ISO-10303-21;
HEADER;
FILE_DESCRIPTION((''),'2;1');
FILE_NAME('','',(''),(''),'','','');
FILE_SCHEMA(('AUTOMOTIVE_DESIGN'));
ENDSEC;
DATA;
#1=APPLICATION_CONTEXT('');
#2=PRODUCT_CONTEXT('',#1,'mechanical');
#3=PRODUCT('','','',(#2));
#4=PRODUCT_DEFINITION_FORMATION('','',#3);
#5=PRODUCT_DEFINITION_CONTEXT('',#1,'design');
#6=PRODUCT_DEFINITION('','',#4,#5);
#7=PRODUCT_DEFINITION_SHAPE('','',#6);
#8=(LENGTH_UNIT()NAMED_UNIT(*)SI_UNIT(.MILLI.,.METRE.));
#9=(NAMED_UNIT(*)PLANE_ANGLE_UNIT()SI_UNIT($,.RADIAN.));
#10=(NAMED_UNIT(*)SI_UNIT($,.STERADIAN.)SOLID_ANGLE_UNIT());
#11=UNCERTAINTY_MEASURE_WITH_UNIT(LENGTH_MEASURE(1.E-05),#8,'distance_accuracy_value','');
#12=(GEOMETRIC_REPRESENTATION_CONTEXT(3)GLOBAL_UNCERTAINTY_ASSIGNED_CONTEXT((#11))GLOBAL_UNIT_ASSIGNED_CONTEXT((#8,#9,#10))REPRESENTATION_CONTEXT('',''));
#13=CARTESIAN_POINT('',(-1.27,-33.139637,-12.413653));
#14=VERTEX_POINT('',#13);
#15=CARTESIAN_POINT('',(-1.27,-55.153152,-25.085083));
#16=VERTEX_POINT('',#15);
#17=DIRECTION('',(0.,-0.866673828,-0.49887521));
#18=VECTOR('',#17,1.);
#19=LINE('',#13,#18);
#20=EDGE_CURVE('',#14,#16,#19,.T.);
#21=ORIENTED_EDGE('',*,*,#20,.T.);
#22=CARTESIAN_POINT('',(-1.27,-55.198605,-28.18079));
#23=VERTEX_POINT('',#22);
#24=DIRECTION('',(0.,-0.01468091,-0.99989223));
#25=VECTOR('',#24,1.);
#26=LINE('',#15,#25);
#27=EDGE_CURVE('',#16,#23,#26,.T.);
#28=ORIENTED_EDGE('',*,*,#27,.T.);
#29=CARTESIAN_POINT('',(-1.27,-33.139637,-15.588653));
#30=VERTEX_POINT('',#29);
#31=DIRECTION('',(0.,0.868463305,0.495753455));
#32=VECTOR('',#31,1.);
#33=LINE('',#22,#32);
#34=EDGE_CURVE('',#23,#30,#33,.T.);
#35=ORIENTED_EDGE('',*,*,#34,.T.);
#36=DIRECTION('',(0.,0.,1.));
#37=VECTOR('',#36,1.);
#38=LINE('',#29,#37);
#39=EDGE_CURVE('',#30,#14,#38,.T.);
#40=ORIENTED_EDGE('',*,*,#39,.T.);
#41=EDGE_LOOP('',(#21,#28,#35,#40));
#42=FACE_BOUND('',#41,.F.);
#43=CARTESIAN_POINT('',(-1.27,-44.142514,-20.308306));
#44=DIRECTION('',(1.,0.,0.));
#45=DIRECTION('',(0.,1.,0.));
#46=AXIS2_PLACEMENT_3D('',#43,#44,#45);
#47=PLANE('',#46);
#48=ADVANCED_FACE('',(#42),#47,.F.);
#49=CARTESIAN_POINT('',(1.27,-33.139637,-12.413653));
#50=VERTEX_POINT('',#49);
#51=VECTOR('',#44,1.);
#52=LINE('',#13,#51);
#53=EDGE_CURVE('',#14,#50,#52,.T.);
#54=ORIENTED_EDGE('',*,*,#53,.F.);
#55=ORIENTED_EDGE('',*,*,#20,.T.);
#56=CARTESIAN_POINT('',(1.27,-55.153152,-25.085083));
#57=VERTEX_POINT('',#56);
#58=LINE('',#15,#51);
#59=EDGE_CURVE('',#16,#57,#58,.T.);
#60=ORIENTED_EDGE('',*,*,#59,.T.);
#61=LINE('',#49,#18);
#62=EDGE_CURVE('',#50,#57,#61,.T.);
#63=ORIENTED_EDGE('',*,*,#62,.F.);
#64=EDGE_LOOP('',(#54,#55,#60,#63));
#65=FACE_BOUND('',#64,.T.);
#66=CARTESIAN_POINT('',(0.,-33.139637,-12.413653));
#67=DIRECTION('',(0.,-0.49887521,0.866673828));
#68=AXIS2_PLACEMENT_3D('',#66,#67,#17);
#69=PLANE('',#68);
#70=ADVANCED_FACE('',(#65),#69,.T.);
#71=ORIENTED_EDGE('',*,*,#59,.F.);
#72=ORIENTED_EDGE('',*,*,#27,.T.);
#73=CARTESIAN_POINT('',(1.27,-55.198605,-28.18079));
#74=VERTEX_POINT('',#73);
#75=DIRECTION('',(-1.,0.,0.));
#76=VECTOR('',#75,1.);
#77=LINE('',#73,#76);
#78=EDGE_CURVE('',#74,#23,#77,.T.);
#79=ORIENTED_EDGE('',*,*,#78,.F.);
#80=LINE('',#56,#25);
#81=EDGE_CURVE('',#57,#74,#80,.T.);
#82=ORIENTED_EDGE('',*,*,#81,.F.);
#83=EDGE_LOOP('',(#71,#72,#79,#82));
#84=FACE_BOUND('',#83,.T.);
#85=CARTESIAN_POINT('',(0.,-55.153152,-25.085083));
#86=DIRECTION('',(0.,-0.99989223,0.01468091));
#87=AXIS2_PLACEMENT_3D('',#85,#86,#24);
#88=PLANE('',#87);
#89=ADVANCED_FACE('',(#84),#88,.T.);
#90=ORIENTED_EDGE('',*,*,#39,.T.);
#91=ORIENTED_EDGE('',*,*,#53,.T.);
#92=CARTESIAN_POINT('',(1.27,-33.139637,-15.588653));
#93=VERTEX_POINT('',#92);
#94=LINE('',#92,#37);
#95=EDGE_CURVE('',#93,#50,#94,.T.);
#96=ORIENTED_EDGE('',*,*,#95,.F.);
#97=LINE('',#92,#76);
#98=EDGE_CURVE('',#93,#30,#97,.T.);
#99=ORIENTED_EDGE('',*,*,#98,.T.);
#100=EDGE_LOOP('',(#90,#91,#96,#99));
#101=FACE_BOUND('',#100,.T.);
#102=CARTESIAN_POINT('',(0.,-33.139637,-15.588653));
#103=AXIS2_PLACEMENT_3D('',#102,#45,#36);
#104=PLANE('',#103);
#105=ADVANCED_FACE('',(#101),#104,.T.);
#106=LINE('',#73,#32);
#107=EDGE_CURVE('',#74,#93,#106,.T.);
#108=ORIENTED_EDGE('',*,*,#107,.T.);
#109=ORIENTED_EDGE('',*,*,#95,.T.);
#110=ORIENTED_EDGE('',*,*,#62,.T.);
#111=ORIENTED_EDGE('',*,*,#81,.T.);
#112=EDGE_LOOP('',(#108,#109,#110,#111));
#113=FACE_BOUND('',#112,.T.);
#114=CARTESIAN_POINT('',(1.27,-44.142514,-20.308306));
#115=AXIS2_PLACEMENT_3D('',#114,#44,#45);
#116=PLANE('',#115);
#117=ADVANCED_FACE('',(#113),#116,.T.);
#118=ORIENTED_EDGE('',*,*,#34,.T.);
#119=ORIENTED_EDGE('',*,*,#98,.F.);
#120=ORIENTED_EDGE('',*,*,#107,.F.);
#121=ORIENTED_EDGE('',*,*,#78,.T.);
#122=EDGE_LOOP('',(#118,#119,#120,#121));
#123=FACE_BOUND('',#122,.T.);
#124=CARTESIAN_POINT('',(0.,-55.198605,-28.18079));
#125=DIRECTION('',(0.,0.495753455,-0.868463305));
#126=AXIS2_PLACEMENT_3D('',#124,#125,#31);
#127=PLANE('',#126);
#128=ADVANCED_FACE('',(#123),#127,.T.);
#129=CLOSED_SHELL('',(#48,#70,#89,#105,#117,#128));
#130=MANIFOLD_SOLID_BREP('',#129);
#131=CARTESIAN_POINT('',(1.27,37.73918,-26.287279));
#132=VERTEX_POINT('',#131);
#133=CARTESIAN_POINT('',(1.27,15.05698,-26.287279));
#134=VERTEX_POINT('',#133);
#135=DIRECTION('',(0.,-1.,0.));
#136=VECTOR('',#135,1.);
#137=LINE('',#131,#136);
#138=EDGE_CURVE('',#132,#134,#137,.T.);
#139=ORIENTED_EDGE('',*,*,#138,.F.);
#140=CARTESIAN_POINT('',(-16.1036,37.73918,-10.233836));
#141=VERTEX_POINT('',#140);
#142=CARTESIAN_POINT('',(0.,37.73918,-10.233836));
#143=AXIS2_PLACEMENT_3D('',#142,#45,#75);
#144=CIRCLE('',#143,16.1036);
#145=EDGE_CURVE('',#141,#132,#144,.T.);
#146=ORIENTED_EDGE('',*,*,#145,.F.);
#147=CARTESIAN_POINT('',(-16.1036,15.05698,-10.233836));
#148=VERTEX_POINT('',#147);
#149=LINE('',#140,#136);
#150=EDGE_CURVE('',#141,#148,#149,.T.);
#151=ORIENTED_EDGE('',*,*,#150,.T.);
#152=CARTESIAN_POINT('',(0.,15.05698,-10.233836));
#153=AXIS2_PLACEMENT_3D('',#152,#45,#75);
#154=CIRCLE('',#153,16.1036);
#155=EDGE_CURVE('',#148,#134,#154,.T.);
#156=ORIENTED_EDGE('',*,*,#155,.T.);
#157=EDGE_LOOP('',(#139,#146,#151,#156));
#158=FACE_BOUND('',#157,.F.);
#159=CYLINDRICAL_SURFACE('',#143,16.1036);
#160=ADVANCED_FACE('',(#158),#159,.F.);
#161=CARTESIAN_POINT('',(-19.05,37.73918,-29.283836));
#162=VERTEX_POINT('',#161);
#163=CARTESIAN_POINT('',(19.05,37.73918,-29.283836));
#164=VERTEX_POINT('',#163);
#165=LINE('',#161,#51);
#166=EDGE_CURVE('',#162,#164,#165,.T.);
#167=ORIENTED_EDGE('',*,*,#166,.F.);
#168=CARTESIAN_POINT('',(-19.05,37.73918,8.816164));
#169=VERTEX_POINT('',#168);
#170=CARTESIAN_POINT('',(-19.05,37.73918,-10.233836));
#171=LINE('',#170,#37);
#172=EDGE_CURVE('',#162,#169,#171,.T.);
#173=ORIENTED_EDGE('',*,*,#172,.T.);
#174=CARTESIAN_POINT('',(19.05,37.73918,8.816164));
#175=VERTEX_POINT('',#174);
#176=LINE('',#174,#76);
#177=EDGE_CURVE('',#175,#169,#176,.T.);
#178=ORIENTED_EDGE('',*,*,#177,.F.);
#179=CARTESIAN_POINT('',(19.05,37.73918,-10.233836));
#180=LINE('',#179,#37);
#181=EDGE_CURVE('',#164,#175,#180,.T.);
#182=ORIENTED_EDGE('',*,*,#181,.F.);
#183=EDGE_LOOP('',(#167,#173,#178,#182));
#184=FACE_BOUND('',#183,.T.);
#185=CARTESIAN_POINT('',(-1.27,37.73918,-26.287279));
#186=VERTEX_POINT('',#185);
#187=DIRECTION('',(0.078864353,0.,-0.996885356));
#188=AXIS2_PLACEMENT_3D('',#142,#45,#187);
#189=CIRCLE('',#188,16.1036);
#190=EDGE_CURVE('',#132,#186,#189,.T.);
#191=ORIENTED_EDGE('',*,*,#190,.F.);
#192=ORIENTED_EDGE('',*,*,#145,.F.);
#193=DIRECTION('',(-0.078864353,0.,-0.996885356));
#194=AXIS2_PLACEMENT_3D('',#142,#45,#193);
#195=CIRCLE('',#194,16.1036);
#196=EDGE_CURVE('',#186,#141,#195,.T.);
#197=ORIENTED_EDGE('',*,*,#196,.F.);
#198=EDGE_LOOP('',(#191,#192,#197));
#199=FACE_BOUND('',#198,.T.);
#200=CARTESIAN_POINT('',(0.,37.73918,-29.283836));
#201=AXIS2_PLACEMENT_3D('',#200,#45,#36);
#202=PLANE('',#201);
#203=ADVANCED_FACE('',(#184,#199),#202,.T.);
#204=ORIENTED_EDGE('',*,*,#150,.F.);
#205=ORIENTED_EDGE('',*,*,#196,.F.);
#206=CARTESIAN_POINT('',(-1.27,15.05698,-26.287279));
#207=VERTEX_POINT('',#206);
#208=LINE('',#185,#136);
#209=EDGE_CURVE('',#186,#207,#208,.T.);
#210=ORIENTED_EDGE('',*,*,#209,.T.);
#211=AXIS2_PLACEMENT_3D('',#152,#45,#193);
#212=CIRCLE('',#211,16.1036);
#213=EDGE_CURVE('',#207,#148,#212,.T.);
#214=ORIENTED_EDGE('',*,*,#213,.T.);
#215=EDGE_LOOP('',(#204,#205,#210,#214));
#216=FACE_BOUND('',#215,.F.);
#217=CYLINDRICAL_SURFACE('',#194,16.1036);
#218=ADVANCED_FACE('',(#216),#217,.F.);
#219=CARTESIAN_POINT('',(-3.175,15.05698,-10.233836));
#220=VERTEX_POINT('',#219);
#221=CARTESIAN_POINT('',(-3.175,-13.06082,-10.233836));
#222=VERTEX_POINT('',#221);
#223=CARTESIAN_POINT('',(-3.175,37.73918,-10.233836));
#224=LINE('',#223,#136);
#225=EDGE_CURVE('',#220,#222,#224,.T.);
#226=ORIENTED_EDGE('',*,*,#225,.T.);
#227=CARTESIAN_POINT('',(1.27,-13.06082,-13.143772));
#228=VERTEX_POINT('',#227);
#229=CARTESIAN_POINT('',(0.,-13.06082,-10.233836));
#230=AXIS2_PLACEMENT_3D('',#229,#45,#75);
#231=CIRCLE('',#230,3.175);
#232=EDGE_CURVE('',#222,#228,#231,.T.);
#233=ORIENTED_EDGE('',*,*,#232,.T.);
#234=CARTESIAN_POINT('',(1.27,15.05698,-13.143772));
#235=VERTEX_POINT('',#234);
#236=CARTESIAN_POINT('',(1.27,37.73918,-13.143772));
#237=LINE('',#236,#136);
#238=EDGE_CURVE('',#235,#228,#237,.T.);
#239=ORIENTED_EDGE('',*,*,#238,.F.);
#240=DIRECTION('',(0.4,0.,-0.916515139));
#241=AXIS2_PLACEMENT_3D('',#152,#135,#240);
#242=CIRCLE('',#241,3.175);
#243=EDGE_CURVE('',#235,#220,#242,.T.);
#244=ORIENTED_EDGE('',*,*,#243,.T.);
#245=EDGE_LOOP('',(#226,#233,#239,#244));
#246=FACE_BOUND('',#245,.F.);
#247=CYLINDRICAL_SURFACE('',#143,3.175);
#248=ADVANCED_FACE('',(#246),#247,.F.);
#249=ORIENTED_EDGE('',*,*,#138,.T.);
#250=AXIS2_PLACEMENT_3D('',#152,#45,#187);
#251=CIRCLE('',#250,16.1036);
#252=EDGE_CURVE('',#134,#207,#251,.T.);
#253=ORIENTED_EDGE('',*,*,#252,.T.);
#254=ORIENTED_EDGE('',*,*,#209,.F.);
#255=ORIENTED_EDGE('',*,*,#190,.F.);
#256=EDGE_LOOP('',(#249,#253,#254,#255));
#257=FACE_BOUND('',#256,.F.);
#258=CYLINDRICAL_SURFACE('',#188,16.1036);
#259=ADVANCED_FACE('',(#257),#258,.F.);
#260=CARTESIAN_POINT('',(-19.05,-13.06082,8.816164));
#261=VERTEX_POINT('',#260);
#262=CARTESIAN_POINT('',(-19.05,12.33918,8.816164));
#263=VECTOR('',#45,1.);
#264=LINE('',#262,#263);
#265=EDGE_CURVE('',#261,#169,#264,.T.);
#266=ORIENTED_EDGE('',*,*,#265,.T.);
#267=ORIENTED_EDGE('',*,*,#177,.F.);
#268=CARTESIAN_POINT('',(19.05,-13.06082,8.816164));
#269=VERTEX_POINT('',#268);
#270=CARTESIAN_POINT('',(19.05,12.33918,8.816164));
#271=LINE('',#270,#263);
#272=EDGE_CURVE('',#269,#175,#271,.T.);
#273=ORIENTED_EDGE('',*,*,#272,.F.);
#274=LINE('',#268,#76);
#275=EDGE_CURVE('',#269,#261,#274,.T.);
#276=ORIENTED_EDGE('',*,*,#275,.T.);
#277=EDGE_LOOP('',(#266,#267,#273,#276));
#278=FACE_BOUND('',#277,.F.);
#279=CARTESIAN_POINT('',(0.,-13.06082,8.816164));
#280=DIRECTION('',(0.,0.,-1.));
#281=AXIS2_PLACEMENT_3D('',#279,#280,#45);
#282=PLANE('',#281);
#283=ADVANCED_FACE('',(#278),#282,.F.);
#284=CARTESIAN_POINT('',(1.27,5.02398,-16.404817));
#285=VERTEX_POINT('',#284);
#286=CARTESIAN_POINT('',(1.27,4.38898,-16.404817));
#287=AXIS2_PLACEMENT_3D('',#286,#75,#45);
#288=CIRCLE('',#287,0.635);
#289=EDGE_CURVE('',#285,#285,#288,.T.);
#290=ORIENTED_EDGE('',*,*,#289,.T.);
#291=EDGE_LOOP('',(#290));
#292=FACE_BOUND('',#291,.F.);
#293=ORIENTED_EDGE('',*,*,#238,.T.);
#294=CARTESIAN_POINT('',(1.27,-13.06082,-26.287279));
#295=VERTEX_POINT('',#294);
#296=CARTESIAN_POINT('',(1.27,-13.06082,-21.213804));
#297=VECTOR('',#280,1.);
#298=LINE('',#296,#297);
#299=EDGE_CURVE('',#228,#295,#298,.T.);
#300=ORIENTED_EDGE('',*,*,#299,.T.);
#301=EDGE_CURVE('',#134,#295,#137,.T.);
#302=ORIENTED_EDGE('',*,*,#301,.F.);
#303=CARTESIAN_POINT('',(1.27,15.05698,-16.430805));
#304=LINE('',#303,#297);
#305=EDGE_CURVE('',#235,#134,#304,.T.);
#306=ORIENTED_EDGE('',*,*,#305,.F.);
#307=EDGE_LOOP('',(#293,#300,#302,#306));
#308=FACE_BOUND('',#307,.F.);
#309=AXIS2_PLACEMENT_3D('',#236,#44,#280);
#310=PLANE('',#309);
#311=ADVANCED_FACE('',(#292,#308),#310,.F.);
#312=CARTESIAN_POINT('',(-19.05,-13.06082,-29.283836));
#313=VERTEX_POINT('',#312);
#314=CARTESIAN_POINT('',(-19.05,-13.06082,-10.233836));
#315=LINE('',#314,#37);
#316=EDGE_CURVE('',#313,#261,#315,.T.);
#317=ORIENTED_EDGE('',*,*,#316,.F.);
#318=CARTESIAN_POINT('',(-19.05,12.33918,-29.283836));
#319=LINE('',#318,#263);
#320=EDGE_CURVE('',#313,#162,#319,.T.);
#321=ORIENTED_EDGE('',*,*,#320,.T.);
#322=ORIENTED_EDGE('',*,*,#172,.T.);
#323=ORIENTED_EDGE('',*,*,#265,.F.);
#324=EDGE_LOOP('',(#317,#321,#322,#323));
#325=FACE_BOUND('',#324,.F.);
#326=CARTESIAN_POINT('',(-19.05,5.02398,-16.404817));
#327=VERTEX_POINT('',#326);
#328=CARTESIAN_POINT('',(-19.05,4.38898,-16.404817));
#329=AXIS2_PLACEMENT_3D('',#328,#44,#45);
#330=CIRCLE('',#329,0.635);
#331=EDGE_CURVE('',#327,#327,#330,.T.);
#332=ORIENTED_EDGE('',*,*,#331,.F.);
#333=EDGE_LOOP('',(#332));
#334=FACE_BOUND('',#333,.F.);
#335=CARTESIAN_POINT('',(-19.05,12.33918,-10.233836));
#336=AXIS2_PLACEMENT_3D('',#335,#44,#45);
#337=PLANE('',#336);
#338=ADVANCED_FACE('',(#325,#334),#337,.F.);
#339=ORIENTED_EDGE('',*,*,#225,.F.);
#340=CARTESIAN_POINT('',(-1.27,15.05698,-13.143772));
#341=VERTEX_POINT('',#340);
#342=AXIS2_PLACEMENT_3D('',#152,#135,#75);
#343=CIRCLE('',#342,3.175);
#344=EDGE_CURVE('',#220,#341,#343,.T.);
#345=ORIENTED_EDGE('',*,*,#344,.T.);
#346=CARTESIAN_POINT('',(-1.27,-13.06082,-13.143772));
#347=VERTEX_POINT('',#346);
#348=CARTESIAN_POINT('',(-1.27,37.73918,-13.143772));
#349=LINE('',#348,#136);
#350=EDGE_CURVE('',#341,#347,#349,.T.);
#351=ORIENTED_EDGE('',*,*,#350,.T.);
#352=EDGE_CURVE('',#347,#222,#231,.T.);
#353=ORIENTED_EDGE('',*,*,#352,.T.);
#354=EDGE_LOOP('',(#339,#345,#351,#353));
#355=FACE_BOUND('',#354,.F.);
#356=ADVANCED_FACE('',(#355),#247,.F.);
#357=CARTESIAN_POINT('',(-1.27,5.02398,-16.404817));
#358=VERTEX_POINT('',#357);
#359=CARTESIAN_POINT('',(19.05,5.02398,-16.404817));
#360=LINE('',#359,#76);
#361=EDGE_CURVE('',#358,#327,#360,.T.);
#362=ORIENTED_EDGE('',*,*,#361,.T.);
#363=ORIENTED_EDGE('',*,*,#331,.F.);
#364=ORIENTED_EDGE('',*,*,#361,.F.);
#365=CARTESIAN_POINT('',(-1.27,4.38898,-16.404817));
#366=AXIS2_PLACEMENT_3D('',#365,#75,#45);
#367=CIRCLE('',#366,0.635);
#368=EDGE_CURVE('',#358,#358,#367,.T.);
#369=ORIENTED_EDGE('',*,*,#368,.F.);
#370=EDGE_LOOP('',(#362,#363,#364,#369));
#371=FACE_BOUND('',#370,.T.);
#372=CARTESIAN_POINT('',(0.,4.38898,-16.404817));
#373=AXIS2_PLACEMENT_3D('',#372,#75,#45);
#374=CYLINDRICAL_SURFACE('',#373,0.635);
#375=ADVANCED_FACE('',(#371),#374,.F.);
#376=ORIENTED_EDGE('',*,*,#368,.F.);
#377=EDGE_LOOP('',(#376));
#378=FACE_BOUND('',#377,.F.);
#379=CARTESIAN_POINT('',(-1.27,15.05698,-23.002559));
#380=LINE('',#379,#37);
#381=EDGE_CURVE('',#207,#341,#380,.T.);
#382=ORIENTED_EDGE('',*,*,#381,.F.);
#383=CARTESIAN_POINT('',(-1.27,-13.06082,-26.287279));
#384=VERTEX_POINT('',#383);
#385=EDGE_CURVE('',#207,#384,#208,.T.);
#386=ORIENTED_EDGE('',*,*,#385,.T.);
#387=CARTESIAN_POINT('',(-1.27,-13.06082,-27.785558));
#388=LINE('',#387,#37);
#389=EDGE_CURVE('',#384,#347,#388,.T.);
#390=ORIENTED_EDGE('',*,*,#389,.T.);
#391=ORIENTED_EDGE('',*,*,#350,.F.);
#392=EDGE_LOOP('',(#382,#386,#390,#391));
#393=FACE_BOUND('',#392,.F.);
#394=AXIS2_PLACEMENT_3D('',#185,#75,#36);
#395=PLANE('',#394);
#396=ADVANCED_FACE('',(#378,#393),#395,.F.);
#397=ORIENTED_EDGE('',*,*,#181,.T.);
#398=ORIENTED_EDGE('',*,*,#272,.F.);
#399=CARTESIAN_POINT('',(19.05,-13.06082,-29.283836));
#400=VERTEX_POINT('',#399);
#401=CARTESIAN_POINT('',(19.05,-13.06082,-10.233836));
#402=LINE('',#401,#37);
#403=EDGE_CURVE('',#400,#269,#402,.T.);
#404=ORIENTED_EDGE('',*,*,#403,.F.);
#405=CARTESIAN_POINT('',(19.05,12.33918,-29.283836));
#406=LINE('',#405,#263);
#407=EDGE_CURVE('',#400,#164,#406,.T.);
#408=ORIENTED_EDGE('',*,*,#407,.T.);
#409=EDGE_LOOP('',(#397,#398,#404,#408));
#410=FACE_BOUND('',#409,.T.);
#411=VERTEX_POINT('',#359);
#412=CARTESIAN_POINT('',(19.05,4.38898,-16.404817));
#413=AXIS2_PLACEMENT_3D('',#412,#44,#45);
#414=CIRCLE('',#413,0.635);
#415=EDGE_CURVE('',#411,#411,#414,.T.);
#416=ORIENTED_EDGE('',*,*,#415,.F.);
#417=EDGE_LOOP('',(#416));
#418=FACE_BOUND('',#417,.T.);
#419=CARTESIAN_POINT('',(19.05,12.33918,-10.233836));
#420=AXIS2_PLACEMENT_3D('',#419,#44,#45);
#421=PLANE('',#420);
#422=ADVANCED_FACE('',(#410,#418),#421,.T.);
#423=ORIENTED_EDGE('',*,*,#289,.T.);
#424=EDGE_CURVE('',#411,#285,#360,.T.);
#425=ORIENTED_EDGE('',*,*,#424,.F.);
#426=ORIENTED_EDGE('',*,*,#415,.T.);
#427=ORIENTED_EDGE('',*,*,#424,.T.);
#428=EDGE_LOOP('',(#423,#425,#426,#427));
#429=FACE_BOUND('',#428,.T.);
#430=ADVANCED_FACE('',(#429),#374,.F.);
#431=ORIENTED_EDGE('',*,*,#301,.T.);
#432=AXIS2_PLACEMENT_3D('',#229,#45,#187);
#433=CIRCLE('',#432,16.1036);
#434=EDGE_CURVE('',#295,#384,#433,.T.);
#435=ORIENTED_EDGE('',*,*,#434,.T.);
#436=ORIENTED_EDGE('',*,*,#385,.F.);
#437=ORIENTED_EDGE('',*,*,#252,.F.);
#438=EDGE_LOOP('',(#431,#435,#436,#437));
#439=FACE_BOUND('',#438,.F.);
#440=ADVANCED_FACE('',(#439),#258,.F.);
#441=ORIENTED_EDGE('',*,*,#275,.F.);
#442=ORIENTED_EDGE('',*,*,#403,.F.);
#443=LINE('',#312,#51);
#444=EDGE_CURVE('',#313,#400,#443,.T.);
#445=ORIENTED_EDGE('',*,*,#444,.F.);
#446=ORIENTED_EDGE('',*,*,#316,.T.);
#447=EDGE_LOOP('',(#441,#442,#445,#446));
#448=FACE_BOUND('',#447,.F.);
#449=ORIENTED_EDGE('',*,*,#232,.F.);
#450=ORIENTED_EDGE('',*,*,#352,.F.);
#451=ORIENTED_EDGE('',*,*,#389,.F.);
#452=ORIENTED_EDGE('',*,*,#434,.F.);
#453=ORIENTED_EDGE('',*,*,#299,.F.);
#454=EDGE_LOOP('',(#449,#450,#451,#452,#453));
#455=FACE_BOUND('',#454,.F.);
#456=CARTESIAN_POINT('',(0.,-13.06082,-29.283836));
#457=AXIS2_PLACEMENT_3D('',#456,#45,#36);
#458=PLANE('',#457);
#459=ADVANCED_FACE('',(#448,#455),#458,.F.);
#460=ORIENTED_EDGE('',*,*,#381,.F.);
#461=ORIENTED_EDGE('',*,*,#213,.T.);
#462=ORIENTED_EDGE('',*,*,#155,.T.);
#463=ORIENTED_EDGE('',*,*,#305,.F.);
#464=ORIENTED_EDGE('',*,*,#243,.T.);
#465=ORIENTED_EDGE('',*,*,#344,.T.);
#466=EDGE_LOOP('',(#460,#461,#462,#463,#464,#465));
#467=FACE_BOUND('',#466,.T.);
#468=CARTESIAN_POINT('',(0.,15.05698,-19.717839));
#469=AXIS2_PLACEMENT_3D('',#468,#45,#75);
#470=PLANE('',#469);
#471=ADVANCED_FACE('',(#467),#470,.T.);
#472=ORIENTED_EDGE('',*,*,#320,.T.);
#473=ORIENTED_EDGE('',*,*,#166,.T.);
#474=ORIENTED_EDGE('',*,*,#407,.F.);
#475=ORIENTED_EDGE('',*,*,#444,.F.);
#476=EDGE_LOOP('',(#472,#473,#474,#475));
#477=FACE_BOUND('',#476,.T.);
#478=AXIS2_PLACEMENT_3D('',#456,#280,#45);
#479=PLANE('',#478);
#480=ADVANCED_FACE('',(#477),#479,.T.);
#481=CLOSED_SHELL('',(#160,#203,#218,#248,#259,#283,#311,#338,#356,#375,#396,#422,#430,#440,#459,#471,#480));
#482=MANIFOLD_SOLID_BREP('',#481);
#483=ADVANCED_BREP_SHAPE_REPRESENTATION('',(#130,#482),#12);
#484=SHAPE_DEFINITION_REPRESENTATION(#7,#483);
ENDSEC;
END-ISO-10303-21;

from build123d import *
from build123d import SkipClean  # not in build123d's __all__

# Parameters (mm, degrees)
F0_W      = 50.8
F0_H      = 38.1
F0_R      = 0.635
F1_DEPTH  = 19.05
F3_DEPTH  = 22.6822
F3_FACE_R = 3.175
F4_DEPTH  = 50.801
F5_DEPTH  = 1.27


with BuildPart() as f1:
    # F0 (on Right) → F1 (new body, symmetric)
    with BuildSketch(Plane.YZ):
        with Locations((12.3391804014, -10.2338362485)):
            Rectangle(F0_W, F0_H)
        with Locations((4.3889804014, -16.404817152)):
            Circle(F0_R, mode=Mode.SUBTRACT)
    extrude(amount=F1_DEPTH, both=True)

    # F2 (on face) → F3 (cut)
    with BuildSketch(Plane(origin=(0, 37.7391804014, 0), x_dir=(-1, 0, 0), z_dir=(0, 1, 0))):
        with BuildLine():
            Line((-1.27, -13.1437718148), (-1.27, -26.2872792736))
            ThreePointArc((-1.27, -26.2872792736), (0, -26.3374362485), (1.27, -26.2872792736))
            Line((1.27, -26.2872792736), (1.27, -13.1437718148))
            ThreePointArc((1.27, -13.1437718148), (0, -13.4088362485), (-1.27, -13.1437718148))
        make_face()
        with BuildLine():
            ThreePointArc((1.27, -26.2872792736), (11.8274575662, -21.1625681274), (16.1036, -10.2338362485))
            ThreePointArc((16.1036, -10.2338362485), (-10.9287318789, 1.5936213177), (-1.27, -26.2872792736))
            Line((-1.27, -26.2872792736), (-1.27, -13.1437718148))
            ThreePointArc((-1.27, -13.1437718148), (-1.7390191201, -7.5774406643), (3.175, -10.2338362485))
            ThreePointArc((3.175, -10.2338362485), (2.6563955842, -11.9728553686), (1.27, -13.1437718148))
            Line((1.27, -13.1437718148), (1.27, -26.2872792736))
        make_face()
    extrude(amount=-F3_DEPTH, mode=Mode.SUBTRACT)

    # F3_face (on face) + F2 (on face) → F4 (cut, through all)
    with BuildSketch(Plane(origin=(0, 37.7391804014, -10.2338362485), x_dir=(-1, 0, 0), z_dir=(0, 1, 0))):
        Circle(F3_FACE_R)
    with BuildSketch(Plane(origin=(0, 37.7391804014, 0), x_dir=(-1, 0, 0), z_dir=(0, 1, 0))):
        with BuildLine():
            Line((-1.27, -13.1437718148), (-1.27, -26.2872792736))
            ThreePointArc((-1.27, -26.2872792736), (0, -26.3374362485), (1.27, -26.2872792736))
            Line((1.27, -26.2872792736), (1.27, -13.1437718148))
            ThreePointArc((1.27, -13.1437718148), (0, -13.4088362485), (-1.27, -13.1437718148))
        make_face()
    with SkipClean():  # cleaning this boolean's faces spoils the solid; the shape is the same uncleaned
        extrude(amount=-F4_DEPTH, mode=Mode.SUBTRACT)


with BuildPart() as f5:
    # F0 (on Right) → F5 (new body, symmetric)
    with BuildSketch(Plane.YZ):
        Polygon((-33.1396368386, -15.5886525063), (-33.1396368386, -12.4136525063), (-55.153152075, -25.0850828493), (-55.1986047759, -28.1807902733), align=None)
    extrude(amount=F5_DEPTH, both=True)


solid = Compound([f1.part, f5.part])
